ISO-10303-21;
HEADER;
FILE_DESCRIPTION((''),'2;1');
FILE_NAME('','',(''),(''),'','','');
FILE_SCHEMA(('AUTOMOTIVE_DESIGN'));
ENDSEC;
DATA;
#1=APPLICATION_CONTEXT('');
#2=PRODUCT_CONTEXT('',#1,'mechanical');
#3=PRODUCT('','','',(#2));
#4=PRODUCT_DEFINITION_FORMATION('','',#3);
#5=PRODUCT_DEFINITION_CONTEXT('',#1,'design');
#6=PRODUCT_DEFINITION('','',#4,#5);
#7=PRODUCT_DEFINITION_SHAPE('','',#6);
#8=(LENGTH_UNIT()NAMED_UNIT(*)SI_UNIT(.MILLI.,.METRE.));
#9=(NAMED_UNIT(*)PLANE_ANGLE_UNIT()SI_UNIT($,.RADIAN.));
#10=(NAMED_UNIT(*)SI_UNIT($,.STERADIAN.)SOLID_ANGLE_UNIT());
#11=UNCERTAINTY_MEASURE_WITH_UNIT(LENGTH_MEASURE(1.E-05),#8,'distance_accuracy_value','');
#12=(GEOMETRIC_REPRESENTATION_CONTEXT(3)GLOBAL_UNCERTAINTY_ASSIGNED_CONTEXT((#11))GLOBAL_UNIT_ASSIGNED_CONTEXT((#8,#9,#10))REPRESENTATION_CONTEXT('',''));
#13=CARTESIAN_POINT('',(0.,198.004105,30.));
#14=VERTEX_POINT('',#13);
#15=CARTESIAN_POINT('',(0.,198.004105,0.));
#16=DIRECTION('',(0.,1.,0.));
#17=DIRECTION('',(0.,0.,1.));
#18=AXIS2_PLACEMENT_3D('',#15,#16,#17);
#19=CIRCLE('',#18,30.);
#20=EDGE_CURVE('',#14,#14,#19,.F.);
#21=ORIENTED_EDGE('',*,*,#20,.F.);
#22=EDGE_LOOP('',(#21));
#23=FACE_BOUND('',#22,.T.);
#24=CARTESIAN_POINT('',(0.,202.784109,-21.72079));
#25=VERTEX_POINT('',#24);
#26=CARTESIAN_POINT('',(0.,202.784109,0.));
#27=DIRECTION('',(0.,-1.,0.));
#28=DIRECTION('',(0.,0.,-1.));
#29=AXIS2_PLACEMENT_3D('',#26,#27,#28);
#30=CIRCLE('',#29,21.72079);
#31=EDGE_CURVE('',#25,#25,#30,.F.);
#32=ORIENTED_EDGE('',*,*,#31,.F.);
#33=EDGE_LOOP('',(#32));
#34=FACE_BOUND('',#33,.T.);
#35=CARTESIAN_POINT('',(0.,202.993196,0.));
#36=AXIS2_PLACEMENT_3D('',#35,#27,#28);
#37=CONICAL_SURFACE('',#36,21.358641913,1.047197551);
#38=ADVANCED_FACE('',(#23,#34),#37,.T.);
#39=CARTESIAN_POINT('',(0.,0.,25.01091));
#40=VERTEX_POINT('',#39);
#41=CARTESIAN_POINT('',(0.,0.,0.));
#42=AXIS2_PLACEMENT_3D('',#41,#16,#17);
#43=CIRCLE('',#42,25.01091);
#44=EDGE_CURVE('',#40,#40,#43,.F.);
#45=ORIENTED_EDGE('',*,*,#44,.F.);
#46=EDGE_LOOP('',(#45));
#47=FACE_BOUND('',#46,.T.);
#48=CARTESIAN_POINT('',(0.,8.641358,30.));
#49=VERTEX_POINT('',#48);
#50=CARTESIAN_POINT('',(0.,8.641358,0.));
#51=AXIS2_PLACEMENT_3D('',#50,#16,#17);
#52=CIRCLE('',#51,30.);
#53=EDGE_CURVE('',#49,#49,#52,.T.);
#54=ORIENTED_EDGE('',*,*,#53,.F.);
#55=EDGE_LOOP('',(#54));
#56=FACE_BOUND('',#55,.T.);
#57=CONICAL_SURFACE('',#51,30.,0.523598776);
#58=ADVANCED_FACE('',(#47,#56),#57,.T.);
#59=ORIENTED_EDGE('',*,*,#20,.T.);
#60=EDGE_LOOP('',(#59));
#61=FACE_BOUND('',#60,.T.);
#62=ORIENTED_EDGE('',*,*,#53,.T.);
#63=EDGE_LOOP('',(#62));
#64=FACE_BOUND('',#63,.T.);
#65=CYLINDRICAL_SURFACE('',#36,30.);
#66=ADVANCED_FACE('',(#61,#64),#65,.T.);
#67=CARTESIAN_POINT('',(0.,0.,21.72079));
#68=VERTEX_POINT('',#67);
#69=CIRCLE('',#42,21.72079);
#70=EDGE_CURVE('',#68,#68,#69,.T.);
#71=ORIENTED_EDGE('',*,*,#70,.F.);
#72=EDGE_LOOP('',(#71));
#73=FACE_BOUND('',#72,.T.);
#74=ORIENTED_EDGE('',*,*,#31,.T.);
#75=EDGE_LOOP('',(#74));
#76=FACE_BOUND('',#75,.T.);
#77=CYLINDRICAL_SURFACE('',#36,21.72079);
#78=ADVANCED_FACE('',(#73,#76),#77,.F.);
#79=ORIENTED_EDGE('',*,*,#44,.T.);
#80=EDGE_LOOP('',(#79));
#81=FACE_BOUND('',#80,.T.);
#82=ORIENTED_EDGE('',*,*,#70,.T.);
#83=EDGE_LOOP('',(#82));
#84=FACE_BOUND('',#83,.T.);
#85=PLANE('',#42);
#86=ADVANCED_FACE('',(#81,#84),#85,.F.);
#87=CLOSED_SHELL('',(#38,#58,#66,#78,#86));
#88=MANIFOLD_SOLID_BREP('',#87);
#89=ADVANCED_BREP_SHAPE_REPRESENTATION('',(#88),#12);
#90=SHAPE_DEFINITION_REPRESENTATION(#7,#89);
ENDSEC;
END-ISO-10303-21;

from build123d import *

# Parameters (mm, degrees)
SKETCH1_R           = 30
BOSS_EXTRUDE1_DEPTH = 202.993196
SKETCH2_R           = 21.720790464
CUT_EXTRUDE1_DEPTH  = 208.379453231
CHAMFER1_SIZE       = 4.98909
CHAMFER1_SIZE_2     = 8.641358


with BuildPart() as part:
    # Sketch1 → Boss-Extrude1 (new body)
    with BuildSketch(Plane(origin=(0, 0, 0), x_dir=(1, 0, 0), z_dir=(0, 1, 0))):
        with Locations(Location((0, 0, 0), (0, 0, 270))):
            Circle(SKETCH1_R)
    extrude(amount=BOSS_EXTRUDE1_DEPTH)

    # Sketch2 → Cut-Extrude1 (cut, through all)
    with BuildSketch(Plane(origin=(0, 0, 0), x_dir=(1, 0, 0), z_dir=(0, 1, 0))):
        with Locations(Location((0, 0, 0), (0, 0, 270))):
            Circle(SKETCH2_R)
    extrude(amount=CUT_EXTRUDE1_DEPTH, mode=Mode.SUBTRACT)

    # Chamfer1
    # the kernel refuses this chamfer: 8.641358, 4.98909 mm, written as the material it takes off along each edge
    with BuildSketch(Plane(origin=(0, 202.993196, 0), x_dir=(0, 0, 1), z_dir=(-1, 0, 0))) as chamfer1_piece_1:
        Polygon((30, -CHAMFER1_SIZE), (30 - CHAMFER1_SIZE_2, 0), (30, 0), align=None)
    revolve(axis=Axis((0, 202.993196, 0), (0, 1, 0)), mode=Mode.SUBTRACT)
    with BuildSketch(Plane(origin=(0, 0, 0), x_dir=(0, 0, 1), z_dir=(-1, 0, 0))) as chamfer1_piece_2:
        Polygon((30, CHAMFER1_SIZE_2), (30 - CHAMFER1_SIZE, 0), (30, 0), align=None)
    revolve(axis=Axis((0, 0, 0), (0, 1, 0)), mode=Mode.SUBTRACT)


solid = part.part
